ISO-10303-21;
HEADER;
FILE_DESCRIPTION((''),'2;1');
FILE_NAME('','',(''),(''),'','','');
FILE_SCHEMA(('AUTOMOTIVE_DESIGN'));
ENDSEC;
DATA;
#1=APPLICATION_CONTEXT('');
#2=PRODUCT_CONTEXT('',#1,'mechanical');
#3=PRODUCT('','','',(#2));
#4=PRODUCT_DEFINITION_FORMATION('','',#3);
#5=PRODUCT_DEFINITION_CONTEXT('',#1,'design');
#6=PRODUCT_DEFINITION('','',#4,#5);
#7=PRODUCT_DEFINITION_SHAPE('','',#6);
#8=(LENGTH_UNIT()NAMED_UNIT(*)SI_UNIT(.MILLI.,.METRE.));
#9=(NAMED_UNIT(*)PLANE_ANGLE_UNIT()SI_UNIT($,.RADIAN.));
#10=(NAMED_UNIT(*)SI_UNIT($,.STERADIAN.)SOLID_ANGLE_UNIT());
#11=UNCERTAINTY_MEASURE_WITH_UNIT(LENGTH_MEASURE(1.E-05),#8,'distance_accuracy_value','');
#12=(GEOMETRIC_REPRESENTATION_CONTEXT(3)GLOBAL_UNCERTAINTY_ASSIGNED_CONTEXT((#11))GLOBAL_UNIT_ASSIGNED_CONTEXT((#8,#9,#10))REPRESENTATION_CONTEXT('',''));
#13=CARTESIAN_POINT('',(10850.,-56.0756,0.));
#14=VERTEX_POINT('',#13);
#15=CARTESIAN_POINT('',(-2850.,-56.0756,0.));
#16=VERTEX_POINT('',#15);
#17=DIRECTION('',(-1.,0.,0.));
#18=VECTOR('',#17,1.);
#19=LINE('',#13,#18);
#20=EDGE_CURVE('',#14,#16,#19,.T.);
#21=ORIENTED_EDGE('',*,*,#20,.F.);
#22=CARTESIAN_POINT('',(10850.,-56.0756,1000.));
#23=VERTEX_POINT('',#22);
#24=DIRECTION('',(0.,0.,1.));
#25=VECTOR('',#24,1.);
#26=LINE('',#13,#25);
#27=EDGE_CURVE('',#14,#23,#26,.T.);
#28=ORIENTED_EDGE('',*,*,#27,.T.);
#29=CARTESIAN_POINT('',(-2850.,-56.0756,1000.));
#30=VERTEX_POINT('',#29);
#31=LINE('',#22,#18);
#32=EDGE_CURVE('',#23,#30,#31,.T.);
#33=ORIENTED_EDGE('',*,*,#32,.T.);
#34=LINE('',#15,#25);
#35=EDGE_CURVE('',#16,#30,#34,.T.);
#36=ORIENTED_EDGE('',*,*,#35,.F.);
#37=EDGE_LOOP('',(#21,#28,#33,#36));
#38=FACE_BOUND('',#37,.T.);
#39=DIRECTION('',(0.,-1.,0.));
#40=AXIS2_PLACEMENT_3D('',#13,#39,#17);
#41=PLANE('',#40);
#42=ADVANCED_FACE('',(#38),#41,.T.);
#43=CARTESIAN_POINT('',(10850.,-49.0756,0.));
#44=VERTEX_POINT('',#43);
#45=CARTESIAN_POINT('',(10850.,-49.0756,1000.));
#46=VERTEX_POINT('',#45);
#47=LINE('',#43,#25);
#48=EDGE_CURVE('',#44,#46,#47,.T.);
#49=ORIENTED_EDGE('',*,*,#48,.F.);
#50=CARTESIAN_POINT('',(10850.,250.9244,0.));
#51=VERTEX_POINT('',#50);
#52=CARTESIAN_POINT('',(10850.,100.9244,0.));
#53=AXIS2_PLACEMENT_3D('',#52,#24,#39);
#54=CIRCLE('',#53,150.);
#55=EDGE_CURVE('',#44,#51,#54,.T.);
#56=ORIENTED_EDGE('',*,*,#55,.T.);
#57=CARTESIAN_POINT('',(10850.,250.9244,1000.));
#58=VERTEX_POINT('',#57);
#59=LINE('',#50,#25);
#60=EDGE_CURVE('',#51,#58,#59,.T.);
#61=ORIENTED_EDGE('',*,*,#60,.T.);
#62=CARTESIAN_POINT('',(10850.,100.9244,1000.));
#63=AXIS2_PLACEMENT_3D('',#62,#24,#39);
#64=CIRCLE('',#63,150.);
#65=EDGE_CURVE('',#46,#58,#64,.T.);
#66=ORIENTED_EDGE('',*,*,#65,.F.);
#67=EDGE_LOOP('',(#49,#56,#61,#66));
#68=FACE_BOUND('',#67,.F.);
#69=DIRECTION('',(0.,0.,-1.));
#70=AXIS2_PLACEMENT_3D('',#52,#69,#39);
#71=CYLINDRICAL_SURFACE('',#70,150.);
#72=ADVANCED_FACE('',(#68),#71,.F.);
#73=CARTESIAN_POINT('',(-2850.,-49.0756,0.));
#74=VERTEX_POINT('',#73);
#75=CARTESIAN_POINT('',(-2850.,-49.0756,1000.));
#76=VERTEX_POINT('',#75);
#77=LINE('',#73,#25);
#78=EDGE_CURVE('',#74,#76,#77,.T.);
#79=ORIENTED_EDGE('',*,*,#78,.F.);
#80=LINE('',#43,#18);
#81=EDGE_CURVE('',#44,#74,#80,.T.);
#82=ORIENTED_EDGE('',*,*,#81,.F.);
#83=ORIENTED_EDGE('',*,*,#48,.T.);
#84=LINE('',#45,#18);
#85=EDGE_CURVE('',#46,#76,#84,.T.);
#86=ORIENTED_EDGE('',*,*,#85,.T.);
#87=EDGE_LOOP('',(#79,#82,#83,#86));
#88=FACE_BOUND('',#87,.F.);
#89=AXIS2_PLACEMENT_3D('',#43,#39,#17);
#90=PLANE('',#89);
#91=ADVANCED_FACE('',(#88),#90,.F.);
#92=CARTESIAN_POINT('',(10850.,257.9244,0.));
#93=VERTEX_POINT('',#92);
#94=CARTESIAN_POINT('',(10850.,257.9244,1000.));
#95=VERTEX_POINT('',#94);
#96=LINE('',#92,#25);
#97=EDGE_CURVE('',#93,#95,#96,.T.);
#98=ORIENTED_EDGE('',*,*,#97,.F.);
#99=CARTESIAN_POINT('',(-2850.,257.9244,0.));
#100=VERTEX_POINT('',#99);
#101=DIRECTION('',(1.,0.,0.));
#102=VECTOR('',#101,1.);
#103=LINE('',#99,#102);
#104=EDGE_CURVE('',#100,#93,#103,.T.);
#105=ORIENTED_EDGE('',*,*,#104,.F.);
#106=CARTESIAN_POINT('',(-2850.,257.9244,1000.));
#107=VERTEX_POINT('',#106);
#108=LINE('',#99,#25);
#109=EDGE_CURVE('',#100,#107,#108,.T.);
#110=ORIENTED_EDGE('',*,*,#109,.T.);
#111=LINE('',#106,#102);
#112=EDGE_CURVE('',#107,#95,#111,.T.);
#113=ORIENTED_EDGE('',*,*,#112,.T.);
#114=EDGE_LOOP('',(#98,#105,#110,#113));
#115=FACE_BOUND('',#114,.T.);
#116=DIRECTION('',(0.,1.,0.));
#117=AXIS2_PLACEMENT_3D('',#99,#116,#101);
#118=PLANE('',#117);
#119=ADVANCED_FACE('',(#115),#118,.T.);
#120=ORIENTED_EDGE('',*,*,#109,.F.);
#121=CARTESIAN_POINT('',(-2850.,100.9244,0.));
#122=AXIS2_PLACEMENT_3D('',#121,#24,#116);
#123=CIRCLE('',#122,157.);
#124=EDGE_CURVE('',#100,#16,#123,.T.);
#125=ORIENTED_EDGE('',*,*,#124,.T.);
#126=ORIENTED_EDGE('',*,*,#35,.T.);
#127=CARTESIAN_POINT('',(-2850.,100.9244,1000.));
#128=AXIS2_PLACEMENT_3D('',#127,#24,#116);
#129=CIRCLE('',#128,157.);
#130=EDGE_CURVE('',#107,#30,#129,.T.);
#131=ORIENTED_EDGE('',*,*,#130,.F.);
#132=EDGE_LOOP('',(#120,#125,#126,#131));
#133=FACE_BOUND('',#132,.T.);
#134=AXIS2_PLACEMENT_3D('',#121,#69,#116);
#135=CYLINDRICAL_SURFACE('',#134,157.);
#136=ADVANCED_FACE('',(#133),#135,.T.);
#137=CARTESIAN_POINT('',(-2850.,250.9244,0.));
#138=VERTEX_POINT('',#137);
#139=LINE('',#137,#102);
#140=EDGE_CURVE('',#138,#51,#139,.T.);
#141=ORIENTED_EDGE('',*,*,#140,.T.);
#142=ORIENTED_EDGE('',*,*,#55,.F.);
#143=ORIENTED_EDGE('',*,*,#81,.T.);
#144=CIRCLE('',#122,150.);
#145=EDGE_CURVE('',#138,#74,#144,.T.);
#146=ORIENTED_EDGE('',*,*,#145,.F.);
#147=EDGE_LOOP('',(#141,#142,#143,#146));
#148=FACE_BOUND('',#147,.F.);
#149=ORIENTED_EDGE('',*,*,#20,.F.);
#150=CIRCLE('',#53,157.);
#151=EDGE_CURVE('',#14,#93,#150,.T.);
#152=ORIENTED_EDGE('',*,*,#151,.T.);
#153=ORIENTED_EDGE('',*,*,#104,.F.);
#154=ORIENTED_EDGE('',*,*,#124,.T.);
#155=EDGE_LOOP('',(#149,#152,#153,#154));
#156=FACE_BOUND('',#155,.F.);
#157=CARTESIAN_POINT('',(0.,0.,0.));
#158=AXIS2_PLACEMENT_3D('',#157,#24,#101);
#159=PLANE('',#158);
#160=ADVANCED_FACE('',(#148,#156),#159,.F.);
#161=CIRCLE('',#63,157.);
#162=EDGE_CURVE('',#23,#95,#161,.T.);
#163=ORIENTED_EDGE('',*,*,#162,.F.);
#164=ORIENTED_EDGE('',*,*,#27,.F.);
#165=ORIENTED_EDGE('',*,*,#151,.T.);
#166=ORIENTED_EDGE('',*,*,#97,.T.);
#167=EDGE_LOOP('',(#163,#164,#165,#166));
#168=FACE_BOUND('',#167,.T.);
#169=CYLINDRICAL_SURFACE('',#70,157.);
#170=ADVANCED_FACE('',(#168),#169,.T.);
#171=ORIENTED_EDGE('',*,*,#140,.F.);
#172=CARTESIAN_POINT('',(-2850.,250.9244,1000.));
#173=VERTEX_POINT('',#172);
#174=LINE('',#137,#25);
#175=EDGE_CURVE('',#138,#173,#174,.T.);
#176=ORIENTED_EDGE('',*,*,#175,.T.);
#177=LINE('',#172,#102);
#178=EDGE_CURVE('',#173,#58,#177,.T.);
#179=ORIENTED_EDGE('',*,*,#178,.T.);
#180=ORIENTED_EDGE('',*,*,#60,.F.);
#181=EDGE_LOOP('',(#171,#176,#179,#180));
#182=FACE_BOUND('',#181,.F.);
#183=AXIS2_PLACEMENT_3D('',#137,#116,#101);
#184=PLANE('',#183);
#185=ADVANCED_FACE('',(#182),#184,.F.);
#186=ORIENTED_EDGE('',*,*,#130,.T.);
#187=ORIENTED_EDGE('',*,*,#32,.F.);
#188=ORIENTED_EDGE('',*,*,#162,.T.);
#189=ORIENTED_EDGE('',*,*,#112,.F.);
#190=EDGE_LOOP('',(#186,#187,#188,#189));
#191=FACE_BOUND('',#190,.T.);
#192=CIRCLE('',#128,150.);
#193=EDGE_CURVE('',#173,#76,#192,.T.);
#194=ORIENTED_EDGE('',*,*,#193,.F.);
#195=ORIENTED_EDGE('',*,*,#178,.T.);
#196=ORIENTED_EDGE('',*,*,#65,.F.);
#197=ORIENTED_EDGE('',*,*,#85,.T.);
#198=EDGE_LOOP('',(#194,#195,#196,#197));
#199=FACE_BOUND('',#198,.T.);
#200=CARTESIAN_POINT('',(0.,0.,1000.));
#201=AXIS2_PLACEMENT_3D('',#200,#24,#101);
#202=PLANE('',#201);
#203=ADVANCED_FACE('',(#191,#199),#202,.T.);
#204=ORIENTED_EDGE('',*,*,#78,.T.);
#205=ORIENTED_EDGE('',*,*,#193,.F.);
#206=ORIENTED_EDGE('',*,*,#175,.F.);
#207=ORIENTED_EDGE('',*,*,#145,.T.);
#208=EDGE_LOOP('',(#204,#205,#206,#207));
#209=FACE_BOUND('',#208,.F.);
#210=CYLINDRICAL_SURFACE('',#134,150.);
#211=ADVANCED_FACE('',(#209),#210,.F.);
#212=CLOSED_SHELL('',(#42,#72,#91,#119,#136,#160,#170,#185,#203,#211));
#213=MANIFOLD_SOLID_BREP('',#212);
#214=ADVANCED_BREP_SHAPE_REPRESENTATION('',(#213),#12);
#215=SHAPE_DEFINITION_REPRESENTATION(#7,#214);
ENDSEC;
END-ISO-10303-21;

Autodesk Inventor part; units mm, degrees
ref_plane "YZ Plane" through (0, 0, 0) normal (1, 0, 0) x (0, 1, 0)
ref_plane "XZ Plane" through (0, 0, 0) normal (0, 1, 0) x (-1, 0, 0)
ref_plane "XY Plane" through (0, 0, 0) normal (0, 0, 1) x (1, 0, 0)
sketch "Boceto1" plane through (0, 0, 0) normal (0, 0, 1) x (1, 0, 0)
  line L0 (-2850, 250.9244) -> (10850, 250.9244)
  line L1 (10850, 250.9244) -> (10850, -49.0756) construction
  line L2 (10850, -49.0756) -> (-2850, -49.0756)
  line L3 (-2850, -49.0756) -> (-2850, 250.9244) construction
  line L4 (-2850, 250.9244) -> (10850, -49.0756) construction
  line L5 (10850, 250.9244) -> (-2850, -49.0756) construction
  arc A0 (10850, -49.0756) -> (10850, 250.9244) centre (10850, 100.9244) ccw
  arc A1 (-2850, 250.9244) -> (-2850, -49.0756) centre (-2850, 100.9244) ccw
  arc A2 (10850, -56.0756) -> (10850, 257.9244) centre (10850, 100.9244) ccw
  line L6 (10850, -56.0756) -> (-2850, -56.0756)
  arc A3 (-2850, 257.9244) -> (-2850, -56.0756) centre (-2850, 100.9244) ccw
  line L7 (-2850, 257.9244) -> (10850, 257.9244)
  point P0 (-650, 3378.1666)
  point P1 (4000, 100.9244)
  dimension "d11" = 13700
  dimension "d12" = 7
  dimension "d13" = 300
extrude "Extrusión1" add sketch "Boceto1" along normal blind 1000
equation "\"L\" = 14000"
properties part number "BandaLona"
